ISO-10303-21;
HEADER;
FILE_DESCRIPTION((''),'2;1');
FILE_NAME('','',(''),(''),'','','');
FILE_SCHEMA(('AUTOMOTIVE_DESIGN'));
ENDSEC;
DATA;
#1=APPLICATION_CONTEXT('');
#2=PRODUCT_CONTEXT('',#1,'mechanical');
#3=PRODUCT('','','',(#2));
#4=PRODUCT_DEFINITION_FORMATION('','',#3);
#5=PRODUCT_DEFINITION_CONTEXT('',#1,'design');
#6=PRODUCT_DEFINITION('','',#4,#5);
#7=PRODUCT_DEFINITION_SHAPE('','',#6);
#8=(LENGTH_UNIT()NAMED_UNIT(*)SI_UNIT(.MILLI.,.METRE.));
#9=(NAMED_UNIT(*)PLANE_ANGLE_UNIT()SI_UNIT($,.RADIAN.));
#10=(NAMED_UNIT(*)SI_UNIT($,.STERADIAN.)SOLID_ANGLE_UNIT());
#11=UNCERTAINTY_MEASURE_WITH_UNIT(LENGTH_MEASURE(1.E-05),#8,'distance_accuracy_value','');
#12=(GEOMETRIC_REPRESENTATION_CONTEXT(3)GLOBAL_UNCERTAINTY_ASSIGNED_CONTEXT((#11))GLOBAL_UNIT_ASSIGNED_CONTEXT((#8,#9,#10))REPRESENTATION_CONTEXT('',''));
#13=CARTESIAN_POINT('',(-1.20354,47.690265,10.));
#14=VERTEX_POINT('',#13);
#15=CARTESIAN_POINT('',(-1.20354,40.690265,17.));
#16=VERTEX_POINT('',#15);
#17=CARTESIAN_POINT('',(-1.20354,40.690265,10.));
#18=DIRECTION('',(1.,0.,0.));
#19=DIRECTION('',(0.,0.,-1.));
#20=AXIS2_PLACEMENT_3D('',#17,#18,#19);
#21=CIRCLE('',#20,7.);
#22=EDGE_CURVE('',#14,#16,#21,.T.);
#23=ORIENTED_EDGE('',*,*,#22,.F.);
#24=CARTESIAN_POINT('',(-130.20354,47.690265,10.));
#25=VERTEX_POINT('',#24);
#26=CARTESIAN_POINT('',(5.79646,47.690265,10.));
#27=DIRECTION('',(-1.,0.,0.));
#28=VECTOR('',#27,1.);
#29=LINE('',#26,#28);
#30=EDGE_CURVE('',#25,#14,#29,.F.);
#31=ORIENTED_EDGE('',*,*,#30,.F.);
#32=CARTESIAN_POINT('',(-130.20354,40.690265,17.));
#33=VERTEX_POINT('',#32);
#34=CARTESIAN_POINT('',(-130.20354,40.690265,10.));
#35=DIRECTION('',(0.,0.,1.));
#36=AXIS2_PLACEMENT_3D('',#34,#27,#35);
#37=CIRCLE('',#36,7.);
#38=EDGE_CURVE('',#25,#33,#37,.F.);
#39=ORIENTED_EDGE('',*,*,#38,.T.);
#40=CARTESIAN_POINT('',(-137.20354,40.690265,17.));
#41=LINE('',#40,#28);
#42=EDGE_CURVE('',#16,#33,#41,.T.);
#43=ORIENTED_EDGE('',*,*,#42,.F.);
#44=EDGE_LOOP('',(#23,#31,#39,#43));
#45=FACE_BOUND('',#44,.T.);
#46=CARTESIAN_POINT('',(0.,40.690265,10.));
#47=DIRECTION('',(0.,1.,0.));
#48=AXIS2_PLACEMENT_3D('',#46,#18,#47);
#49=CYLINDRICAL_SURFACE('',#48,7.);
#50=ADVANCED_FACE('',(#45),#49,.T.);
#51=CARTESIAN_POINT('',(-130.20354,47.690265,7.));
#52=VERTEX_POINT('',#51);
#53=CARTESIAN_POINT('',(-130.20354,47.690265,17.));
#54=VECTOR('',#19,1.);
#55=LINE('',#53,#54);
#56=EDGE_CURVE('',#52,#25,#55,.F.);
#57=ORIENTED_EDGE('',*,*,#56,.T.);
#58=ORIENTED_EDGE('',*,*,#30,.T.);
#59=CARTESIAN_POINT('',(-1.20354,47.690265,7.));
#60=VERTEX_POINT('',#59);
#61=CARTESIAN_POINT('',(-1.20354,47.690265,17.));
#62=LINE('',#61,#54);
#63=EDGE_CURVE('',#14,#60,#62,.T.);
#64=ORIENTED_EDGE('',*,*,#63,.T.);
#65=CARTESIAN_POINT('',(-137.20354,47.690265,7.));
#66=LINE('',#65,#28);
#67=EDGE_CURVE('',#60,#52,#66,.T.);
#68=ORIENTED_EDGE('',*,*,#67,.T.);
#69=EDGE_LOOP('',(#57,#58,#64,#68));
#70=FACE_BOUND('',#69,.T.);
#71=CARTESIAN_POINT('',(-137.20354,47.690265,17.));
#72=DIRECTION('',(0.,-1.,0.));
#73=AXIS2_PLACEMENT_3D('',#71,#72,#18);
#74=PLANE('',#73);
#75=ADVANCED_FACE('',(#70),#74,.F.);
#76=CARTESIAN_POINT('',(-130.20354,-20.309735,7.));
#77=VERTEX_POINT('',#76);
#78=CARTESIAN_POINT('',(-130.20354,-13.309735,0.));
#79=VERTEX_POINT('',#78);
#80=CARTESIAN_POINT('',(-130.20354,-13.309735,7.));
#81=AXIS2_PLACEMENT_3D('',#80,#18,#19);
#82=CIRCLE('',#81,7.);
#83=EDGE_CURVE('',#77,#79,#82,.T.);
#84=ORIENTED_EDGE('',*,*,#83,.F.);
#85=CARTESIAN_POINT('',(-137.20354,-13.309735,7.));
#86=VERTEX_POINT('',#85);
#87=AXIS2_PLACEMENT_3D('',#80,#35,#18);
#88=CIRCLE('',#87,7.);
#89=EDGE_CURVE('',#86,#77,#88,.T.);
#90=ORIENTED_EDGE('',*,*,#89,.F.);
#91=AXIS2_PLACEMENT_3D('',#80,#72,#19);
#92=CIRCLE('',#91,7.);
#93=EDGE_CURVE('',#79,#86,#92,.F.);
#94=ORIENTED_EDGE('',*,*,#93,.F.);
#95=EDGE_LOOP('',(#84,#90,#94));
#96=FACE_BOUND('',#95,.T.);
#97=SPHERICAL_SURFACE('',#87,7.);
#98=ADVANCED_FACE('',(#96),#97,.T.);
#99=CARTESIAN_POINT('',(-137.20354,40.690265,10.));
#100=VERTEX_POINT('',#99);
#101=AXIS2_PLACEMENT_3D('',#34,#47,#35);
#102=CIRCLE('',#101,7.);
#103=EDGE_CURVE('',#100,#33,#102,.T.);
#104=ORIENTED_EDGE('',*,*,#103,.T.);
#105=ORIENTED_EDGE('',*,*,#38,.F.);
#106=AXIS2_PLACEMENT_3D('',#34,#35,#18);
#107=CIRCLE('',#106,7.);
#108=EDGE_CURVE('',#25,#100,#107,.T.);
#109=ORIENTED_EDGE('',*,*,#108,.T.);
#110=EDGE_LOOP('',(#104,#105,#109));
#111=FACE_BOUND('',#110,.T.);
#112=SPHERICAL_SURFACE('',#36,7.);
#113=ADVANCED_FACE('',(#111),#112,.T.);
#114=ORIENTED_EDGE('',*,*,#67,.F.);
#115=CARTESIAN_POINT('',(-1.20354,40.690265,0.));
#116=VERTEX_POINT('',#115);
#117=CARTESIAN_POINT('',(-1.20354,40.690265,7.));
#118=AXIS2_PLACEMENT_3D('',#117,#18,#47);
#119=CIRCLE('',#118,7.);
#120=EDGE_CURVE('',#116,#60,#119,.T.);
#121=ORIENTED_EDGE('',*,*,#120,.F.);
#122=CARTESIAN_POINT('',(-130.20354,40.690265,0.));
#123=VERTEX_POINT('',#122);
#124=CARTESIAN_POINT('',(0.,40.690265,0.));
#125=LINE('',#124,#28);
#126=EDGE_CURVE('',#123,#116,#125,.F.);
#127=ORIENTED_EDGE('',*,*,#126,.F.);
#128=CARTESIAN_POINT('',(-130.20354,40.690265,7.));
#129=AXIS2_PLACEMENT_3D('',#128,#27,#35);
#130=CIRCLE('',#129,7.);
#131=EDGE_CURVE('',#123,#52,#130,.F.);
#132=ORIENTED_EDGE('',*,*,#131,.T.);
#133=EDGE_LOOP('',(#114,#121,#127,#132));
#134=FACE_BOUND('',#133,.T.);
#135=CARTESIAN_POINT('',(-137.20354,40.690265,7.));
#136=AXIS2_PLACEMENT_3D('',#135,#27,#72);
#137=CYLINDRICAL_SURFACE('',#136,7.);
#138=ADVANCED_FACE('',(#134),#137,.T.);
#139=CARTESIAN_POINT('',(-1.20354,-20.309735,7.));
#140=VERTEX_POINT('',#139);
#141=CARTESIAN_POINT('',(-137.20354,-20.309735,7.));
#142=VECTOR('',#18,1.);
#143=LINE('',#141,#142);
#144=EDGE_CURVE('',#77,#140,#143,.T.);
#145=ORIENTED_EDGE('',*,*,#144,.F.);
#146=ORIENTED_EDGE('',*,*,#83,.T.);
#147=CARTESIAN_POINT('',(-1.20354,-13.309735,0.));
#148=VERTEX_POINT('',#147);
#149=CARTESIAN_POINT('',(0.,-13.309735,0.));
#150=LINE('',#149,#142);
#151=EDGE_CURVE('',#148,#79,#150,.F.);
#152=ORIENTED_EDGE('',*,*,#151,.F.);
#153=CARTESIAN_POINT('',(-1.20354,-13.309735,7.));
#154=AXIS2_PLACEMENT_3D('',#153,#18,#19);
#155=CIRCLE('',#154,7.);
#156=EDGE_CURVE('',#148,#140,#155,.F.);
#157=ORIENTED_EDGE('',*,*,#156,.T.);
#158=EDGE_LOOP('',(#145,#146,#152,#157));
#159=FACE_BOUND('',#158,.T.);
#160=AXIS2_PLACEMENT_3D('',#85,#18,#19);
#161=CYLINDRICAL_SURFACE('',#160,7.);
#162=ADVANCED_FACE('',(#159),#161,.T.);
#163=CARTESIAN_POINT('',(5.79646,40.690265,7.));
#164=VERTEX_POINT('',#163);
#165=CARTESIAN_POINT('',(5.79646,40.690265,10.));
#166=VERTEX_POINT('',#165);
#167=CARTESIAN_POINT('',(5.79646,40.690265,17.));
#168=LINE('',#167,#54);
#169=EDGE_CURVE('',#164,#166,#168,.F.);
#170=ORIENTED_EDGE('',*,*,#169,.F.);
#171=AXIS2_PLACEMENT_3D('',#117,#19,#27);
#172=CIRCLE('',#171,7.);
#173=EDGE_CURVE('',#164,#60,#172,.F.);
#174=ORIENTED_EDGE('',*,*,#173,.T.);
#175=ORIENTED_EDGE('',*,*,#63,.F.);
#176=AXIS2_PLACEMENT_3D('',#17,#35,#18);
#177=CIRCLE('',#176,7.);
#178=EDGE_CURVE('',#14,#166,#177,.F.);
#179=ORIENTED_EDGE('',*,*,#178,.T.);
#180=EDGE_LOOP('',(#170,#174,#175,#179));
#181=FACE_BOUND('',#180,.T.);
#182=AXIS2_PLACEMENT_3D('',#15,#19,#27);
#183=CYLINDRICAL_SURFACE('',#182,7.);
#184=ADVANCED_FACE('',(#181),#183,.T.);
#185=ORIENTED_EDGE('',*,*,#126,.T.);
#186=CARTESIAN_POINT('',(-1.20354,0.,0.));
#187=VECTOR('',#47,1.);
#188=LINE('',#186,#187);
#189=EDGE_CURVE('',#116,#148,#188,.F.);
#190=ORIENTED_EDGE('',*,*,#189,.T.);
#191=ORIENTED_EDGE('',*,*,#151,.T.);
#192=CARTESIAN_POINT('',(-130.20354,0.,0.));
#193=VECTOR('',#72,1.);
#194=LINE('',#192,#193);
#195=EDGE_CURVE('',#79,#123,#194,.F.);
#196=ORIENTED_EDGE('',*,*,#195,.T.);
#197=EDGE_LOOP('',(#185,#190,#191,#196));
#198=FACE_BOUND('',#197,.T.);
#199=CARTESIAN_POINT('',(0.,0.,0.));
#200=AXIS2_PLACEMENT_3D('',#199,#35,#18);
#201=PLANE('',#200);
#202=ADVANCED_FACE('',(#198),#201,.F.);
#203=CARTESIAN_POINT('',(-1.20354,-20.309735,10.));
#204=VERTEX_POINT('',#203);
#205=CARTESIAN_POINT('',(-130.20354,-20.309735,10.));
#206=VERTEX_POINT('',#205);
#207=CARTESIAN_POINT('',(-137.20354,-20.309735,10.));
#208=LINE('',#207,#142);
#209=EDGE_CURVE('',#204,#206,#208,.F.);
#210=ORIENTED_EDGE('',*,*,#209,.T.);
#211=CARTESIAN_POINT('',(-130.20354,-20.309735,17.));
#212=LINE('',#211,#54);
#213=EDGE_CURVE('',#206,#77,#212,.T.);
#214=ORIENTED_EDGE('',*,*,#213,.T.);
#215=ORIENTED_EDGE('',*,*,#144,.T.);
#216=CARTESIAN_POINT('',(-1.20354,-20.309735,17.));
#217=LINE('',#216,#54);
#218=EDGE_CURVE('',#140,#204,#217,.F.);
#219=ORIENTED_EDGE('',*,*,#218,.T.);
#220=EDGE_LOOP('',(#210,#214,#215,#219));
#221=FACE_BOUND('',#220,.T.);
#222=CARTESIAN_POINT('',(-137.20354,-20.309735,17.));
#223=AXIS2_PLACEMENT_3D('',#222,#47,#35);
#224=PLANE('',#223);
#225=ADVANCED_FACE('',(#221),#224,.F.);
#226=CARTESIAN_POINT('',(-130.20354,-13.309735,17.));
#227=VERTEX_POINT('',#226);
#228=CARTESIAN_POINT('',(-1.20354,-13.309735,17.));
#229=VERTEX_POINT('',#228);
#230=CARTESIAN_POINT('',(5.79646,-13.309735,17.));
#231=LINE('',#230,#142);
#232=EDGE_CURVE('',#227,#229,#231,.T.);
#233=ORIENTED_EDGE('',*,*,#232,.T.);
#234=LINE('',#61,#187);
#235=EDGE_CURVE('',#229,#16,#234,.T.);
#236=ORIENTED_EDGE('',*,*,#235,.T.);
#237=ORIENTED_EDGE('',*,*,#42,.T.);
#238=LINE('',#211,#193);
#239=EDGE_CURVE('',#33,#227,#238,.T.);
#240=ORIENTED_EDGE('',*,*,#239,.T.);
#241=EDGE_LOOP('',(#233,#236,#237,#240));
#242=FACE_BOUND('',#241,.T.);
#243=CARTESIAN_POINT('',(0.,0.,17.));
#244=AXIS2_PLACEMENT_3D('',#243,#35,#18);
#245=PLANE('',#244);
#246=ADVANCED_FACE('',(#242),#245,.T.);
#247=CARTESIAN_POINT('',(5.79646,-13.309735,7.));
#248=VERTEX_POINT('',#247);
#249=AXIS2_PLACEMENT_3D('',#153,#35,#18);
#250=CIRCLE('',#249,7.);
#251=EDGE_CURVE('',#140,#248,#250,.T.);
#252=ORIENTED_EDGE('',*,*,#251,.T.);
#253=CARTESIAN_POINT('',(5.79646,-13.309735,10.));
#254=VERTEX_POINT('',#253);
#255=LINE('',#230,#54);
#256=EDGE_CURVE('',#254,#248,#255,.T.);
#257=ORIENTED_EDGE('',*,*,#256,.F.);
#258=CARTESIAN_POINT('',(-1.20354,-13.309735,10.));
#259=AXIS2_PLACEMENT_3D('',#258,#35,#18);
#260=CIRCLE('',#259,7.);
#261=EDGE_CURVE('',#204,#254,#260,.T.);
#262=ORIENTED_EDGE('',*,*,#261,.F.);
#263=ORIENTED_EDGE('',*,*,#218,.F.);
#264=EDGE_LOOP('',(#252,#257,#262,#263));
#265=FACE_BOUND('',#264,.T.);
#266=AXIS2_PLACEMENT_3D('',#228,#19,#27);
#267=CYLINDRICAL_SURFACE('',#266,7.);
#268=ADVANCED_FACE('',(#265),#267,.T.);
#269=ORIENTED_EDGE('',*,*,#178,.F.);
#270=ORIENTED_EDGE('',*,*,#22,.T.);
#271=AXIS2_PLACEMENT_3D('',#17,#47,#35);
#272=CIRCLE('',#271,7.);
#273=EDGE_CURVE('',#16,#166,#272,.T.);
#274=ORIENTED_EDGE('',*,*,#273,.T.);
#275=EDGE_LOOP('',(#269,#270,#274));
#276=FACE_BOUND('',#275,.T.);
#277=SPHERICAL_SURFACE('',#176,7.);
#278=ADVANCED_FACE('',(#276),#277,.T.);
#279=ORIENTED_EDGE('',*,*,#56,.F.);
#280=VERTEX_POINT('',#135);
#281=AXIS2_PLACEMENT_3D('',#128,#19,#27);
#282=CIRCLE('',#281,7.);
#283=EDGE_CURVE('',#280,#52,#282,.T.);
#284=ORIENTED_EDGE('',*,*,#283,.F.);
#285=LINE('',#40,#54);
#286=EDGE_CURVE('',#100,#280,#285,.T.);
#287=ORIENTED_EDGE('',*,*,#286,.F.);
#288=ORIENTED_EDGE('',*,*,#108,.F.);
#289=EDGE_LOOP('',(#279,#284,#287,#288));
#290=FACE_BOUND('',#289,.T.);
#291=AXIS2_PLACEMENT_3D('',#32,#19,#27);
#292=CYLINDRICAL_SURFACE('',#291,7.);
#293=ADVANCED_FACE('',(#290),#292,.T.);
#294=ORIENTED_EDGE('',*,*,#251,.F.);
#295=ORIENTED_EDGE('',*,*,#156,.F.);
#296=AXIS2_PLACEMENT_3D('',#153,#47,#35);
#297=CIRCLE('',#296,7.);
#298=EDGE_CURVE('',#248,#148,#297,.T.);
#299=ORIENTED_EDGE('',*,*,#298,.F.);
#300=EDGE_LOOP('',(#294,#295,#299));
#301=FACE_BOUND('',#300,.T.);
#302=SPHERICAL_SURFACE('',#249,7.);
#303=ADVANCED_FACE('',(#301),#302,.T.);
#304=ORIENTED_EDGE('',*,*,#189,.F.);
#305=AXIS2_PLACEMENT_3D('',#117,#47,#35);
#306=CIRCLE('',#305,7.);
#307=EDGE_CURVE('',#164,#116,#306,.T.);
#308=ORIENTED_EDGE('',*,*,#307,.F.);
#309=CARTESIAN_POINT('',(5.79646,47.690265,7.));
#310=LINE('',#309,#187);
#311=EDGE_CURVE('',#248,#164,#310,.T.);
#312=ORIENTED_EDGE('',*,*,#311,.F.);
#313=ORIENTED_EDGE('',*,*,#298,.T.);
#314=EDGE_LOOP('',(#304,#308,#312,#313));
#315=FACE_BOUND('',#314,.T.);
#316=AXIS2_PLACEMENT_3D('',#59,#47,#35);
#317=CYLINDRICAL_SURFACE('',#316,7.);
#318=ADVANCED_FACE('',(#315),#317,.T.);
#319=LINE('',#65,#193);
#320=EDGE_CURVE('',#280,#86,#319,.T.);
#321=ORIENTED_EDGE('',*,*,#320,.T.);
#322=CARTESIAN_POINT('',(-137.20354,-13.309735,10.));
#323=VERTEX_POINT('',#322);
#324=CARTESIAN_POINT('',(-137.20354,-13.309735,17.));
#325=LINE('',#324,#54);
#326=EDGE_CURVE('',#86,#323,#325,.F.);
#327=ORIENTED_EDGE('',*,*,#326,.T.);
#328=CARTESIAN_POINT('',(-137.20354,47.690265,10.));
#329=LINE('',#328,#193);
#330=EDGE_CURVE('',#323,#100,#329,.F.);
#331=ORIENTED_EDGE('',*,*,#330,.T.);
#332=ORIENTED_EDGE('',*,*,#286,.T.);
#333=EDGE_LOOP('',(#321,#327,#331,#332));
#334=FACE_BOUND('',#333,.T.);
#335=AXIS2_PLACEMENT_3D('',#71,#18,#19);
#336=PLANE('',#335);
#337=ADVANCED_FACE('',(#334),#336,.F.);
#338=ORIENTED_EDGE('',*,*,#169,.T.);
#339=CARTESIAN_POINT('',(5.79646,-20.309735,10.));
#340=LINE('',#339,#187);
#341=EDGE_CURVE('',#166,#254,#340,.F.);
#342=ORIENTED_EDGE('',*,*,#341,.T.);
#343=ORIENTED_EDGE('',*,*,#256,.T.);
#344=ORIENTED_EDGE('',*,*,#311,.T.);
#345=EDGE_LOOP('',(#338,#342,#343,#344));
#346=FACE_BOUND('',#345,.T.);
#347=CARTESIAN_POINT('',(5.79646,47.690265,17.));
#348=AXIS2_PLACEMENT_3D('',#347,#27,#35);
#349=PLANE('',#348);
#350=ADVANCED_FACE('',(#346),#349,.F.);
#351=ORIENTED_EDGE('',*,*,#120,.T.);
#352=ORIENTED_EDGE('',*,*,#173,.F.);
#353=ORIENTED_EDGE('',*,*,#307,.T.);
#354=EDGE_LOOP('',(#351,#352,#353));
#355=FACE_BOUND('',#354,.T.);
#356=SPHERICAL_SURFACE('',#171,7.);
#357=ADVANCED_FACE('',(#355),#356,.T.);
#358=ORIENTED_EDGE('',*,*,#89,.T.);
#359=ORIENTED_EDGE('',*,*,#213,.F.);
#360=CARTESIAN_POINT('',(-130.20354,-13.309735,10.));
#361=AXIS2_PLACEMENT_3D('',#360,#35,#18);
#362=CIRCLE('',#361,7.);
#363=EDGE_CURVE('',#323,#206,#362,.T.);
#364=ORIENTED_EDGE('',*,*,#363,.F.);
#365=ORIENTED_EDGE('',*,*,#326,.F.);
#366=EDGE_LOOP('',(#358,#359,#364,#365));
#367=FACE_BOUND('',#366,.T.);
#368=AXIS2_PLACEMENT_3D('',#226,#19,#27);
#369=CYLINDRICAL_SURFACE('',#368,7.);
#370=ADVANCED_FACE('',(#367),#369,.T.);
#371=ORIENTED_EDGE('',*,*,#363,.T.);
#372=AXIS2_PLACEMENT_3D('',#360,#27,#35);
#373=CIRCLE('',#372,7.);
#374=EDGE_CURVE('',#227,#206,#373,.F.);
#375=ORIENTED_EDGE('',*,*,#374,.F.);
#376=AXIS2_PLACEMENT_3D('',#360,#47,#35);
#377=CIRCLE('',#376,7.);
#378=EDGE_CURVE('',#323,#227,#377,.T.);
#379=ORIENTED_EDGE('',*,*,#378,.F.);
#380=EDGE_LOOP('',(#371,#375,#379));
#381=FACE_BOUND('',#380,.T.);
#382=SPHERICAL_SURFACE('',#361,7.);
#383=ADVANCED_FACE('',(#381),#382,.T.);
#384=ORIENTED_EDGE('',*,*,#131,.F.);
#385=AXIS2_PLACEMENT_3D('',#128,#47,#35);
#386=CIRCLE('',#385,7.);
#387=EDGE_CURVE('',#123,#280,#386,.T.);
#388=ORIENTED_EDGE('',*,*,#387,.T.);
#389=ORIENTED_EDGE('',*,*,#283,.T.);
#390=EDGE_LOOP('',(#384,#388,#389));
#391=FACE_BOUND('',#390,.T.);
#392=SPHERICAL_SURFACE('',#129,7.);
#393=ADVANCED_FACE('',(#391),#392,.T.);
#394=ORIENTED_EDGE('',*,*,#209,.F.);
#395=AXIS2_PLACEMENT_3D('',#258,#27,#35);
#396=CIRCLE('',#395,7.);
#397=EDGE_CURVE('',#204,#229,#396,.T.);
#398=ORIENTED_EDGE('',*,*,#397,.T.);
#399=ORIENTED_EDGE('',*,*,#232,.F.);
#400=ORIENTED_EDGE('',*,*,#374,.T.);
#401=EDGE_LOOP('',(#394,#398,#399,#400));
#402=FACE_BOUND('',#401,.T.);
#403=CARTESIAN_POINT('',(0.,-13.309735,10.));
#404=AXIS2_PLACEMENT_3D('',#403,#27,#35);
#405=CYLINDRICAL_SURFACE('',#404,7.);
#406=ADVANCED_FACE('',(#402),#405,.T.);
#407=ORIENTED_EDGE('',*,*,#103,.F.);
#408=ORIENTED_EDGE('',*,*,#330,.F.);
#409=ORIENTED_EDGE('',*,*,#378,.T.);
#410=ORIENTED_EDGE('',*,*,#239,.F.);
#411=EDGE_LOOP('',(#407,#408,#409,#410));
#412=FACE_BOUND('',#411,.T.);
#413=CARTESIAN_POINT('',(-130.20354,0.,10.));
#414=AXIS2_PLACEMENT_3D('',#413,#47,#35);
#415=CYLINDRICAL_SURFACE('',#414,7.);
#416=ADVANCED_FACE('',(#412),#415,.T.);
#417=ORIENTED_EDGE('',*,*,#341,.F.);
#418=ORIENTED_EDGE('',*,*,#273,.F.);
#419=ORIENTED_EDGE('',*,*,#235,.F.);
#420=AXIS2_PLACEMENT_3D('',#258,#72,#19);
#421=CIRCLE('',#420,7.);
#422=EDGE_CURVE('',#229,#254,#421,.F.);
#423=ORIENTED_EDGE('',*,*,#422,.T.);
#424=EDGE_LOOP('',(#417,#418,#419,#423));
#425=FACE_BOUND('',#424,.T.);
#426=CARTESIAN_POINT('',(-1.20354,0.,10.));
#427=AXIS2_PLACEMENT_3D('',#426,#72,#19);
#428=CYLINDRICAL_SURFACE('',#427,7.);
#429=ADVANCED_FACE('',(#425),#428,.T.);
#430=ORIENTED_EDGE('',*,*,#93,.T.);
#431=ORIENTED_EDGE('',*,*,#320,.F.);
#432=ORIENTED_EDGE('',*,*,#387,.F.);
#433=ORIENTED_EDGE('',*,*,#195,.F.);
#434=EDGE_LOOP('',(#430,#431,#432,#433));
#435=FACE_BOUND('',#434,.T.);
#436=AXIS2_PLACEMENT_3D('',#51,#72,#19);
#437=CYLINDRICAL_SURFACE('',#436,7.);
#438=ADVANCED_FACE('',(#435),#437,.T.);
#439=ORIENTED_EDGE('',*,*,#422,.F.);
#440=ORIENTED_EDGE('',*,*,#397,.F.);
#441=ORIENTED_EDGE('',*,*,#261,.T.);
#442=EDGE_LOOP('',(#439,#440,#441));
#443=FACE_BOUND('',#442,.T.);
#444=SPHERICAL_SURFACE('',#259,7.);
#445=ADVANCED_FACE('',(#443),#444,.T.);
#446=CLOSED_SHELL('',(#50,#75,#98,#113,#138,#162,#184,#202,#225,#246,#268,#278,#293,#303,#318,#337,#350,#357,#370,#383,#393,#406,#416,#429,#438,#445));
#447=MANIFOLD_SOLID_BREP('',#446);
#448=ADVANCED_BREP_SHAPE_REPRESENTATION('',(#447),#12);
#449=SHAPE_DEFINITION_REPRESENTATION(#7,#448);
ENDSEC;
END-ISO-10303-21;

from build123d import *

# Parameters (mm, degrees)
SKETCH1_W           = 143
SKETCH1_H           = 68
BOSS_EXTRUDE1_DEPTH = 17
FILLET1_R           = 7
FILLET2_R           = 7


with BuildPart() as part:
    # Sketch1 → Boss-Extrude1 (new body)
    with BuildSketch(Plane.XY):
        with Locations((-65.703539823, 13.690265487)):
            Rectangle(SKETCH1_W, SKETCH1_H)
    extrude(amount=BOSS_EXTRUDE1_DEPTH)

    # Fillet1
    fillet1_edges = [part.edges().sort_by_distance(p)[0] for p in [
        (5.796460177, 13.690265487, 17),
        (-65.703539823, 47.690265487, 17),
        (-137.203539823, 13.690265487, 17),
        (-65.703539823, 47.690265487, 0),
        (5.796460177, 13.690265487, 0),
        (-65.703539823, -20.309734513, 0),
        (-137.203539823, 13.690265487, 0),
        (-137.203539823, 47.690265487, 8.5),
        (5.796460177, 47.690265487, 8.5),
        (-65.703539823, -20.309734513, 17),
    ]]
    fillet(fillet1_edges, radius=FILLET1_R)

    # Fillet2
    # the kernel refuses this fillet: 7 mm, written as the material it takes off along each edge
    with BuildSketch(Plane(origin=(-130.203539823, -13.309734513, 10), x_dir=(0, -1, 0), z_dir=(-1, 0, 0))) as fillet2_piece_1_section:
        Polygon((0, 0), (FILLET2_R, 0), (FILLET2_R, FILLET2_R), (0, FILLET2_R), align=None)
    fillet2_piece_1 = extrude(amount=FILLET2_R, mode=Mode.PRIVATE)
    fillet2_piece_1 = fillet2_piece_1 - Plane(origin=(-130.203539823, -13.309734513, 10), x_dir=(0, 0.7071067811865475, -0.7071067811865475), z_dir=(-1, 0, 0)) * Sphere(FILLET2_R, mode=Mode.PRIVATE)
    add(fillet2_piece_1, mode=Mode.SUBTRACT)
    with BuildSketch(Plane(origin=(-130.203539823, -13.309734513, 7), x_dir=(0, -1, 0), z_dir=(-1, 0, 0))) as fillet2_piece_2_section:
        Polygon((0, 0), (FILLET2_R, 0), (FILLET2_R, -FILLET2_R), (0, -FILLET2_R), align=None)
    fillet2_piece_2 = extrude(amount=FILLET2_R, mode=Mode.PRIVATE)
    fillet2_piece_2 = fillet2_piece_2 - Plane(origin=(-130.203539823, -13.309734513, 7), x_dir=(0, 0.7071067811865475, 0.7071067811865475), z_dir=(-1, 0, 0)) * Sphere(FILLET2_R, mode=Mode.PRIVATE)
    add(fillet2_piece_2, mode=Mode.SUBTRACT)
    with BuildSketch(Plane(origin=(-1.203539823, -13.309734513, 10), x_dir=(0, -1, 0), z_dir=(1, 0, 0))) as fillet2_piece_3_section:
        Polygon((0, 0), (FILLET2_R, 0), (FILLET2_R, -FILLET2_R), (0, -FILLET2_R), align=None)
    fillet2_piece_3 = extrude(amount=FILLET2_R, mode=Mode.PRIVATE)
    fillet2_piece_3 = fillet2_piece_3 - Plane(origin=(-1.203539823, -13.309734513, 10), x_dir=(0, 0.7071067811865475, -0.7071067811865475), z_dir=(1, 0, 0)) * Sphere(FILLET2_R, mode=Mode.PRIVATE)
    add(fillet2_piece_3, mode=Mode.SUBTRACT)
    with BuildSketch(Plane(origin=(-1.203539823, -13.309734513, 7), x_dir=(0, -1, 0), z_dir=(1, 0, 0))) as fillet2_piece_4_section:
        Polygon((0, 0), (FILLET2_R, 0), (FILLET2_R, FILLET2_R), (0, FILLET2_R), align=None)
    fillet2_piece_4 = extrude(amount=FILLET2_R, mode=Mode.PRIVATE)
    fillet2_piece_4 = fillet2_piece_4 - Plane(origin=(-1.203539823, -13.309734513, 7), x_dir=(0, 0.7071067811865475, 0.7071067811865475), z_dir=(1, 0, 0)) * Sphere(FILLET2_R, mode=Mode.PRIVATE)
    add(fillet2_piece_4, mode=Mode.SUBTRACT)
    with BuildSketch(Plane(origin=(5.796460177, -20.309734513, 7), x_dir=(0, 1, 0), z_dir=(0, 0, 1))) as fillet2_piece_5:
        with BuildLine():
            CenterArc((FILLET2_R, FILLET2_R), FILLET2_R, 180, 90)
            Line((0, FILLET2_R), (0, 0))
            Line((0, 0), (FILLET2_R, 0))
        make_face()
    extrude(amount=3, mode=Mode.SUBTRACT)
    with BuildSketch(Plane(origin=(-137.203539823, -20.309734513, 7), x_dir=(0, 1, 0), z_dir=(0, 0, 1))) as fillet2_piece_6:
        with BuildLine():
            CenterArc((FILLET2_R, -FILLET2_R), FILLET2_R, 90, 90)
            Line((0, -FILLET2_R), (0, 0))
            Line((0, 0), (FILLET2_R, 0))
        make_face()
    extrude(amount=3, mode=Mode.SUBTRACT)


solid = part.part
